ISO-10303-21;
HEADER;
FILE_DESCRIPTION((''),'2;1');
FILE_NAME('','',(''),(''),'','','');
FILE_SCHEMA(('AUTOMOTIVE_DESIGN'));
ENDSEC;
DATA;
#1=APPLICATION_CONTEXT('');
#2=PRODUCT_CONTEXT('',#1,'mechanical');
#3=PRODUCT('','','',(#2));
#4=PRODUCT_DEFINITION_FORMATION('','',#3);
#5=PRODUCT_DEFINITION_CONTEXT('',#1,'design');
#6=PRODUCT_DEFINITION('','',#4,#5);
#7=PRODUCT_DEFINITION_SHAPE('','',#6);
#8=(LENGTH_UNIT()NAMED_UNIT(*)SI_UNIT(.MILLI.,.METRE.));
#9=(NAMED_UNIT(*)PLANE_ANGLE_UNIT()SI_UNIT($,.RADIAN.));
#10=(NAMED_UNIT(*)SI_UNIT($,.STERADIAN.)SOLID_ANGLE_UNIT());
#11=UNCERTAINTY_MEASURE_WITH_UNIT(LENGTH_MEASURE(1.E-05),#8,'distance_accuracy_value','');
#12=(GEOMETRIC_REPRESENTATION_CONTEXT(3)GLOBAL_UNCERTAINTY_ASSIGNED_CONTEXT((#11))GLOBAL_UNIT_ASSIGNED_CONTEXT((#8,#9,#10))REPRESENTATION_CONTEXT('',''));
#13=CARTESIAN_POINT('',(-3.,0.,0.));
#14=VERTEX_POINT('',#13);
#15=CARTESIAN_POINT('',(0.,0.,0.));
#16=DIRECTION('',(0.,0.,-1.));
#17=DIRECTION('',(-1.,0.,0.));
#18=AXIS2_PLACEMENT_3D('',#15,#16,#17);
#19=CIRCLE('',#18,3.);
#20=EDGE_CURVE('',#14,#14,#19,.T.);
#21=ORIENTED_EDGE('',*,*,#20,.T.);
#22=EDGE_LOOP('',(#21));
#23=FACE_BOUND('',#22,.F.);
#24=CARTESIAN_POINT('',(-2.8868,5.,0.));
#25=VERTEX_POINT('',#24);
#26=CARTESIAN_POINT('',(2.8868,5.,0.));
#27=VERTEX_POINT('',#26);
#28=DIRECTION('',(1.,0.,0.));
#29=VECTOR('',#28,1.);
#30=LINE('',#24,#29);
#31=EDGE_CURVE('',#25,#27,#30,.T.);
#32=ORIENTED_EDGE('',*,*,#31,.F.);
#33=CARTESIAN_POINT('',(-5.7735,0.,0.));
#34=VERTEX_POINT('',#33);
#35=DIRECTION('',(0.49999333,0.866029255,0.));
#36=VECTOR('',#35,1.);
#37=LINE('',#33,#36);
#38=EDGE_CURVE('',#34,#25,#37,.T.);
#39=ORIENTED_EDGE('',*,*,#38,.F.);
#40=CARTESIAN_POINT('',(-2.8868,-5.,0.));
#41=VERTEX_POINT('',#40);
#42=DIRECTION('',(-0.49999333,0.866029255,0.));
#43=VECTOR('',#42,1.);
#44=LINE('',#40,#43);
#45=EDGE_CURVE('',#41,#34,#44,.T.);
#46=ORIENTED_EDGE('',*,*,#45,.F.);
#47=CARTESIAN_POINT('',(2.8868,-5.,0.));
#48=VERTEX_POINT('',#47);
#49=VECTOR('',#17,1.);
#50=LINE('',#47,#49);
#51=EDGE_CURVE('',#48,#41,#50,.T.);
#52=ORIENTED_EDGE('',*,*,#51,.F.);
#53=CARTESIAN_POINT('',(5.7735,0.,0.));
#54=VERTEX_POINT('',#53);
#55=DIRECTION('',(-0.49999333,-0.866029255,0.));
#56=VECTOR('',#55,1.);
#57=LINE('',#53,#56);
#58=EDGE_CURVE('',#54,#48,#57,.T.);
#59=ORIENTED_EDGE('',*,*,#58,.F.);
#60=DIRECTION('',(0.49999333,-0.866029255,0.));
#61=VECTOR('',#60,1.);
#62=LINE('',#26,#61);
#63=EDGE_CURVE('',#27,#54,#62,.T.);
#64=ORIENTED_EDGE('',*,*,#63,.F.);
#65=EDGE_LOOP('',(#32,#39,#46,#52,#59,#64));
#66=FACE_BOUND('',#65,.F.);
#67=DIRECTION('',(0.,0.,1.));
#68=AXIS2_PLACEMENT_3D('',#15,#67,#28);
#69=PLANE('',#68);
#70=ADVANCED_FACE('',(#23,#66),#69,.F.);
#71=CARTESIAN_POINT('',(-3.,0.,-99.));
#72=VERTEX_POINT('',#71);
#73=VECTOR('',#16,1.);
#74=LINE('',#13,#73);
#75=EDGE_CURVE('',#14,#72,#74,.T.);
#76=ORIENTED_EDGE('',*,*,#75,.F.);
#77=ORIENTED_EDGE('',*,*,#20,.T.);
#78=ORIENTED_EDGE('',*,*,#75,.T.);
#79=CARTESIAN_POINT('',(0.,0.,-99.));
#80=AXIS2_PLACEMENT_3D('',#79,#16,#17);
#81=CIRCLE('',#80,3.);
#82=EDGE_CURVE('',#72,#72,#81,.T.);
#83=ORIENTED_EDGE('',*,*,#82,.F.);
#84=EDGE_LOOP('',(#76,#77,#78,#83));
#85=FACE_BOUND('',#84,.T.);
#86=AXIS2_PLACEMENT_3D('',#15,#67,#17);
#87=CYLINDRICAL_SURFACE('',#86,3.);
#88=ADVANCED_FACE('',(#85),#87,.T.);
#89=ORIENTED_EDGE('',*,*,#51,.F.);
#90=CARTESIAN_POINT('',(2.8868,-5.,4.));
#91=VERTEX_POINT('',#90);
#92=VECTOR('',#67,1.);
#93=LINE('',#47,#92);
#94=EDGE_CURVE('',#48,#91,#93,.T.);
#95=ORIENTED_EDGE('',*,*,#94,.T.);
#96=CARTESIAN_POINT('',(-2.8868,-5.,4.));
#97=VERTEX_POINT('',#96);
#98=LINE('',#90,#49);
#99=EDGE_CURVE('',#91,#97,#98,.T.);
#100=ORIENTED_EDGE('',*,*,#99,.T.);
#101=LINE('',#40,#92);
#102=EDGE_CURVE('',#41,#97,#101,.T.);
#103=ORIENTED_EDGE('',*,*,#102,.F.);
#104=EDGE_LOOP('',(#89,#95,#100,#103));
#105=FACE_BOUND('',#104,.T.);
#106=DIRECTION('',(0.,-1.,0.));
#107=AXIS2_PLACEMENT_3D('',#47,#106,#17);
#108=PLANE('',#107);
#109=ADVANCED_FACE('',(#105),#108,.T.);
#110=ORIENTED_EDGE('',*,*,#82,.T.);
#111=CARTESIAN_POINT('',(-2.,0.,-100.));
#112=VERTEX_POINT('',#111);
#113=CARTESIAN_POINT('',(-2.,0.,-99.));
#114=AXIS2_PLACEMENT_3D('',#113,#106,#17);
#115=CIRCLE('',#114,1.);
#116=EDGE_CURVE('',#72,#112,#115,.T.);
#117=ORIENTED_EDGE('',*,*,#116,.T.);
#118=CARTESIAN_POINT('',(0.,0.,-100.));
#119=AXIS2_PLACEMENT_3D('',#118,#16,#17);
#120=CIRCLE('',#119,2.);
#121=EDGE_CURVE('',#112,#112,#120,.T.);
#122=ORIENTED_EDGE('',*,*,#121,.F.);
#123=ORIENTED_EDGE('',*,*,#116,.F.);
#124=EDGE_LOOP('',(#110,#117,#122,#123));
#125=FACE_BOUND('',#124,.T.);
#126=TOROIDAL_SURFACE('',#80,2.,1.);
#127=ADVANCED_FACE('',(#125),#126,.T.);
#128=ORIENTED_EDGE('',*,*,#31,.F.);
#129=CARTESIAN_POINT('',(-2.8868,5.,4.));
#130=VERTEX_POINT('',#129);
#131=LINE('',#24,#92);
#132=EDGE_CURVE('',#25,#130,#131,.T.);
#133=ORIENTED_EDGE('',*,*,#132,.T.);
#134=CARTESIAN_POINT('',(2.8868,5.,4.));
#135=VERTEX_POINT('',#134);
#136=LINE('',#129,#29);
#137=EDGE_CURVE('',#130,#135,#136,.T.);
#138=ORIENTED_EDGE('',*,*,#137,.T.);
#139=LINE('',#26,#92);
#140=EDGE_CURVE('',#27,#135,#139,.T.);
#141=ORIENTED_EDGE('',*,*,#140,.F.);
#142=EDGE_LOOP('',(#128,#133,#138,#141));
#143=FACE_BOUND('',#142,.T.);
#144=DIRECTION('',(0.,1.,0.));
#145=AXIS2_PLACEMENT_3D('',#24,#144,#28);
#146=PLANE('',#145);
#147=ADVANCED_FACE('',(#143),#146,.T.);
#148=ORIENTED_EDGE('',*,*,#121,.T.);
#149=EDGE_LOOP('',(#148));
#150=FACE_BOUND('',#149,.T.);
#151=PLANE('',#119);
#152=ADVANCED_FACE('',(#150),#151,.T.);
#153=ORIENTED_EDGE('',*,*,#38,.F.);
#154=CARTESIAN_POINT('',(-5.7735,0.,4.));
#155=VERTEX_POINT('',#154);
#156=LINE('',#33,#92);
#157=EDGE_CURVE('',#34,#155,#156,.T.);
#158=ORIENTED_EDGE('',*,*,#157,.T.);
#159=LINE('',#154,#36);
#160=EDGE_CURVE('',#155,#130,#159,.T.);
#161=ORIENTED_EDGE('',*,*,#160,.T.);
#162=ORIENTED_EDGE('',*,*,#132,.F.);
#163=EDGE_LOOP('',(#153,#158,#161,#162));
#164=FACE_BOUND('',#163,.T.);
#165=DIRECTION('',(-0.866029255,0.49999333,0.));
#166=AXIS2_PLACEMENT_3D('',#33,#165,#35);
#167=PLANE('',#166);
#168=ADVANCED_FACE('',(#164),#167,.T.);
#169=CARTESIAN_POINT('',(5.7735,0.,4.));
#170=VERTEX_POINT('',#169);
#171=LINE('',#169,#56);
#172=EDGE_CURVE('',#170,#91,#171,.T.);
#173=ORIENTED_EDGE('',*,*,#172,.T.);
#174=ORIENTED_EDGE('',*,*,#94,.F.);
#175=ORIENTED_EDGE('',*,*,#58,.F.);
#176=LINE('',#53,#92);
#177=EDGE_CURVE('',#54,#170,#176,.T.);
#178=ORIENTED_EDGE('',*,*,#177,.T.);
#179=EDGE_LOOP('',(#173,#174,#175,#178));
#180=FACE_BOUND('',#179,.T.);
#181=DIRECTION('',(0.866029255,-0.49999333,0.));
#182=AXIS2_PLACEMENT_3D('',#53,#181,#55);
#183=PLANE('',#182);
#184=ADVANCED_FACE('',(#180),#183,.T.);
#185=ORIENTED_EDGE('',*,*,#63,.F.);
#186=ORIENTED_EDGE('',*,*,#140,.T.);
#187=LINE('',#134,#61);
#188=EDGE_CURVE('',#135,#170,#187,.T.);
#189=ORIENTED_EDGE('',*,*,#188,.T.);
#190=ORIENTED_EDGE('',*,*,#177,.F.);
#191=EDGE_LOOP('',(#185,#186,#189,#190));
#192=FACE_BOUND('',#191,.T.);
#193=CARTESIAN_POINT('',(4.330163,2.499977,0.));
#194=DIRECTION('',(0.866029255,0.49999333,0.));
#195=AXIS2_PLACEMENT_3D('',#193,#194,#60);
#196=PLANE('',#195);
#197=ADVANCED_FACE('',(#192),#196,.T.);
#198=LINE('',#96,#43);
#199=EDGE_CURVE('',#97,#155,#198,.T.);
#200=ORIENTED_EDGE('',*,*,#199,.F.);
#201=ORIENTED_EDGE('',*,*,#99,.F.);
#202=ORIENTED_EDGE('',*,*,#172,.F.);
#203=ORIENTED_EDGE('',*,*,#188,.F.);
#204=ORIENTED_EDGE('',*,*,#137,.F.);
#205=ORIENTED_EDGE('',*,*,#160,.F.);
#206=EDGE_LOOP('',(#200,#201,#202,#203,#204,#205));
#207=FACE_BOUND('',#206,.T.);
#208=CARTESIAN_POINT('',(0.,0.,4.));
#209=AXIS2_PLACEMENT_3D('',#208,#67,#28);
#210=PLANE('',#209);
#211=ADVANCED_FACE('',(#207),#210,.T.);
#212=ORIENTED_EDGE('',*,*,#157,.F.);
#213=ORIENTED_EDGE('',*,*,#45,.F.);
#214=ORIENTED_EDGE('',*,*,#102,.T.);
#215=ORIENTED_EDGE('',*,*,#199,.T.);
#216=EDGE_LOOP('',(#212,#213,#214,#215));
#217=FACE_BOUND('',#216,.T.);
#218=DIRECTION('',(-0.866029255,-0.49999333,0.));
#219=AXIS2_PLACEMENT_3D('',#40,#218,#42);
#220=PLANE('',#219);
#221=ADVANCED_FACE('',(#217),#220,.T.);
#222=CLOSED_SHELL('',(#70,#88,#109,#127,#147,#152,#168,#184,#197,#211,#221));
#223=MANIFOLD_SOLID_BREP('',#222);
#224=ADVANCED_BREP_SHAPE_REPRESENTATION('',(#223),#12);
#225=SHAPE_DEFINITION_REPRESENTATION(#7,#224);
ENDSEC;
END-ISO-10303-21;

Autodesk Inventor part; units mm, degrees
ref_plane "YZ Plane" through (0, 0, 0) normal (1, 0, 0) x (0, 1, 0)
ref_plane "XZ Plane" through (0, 0, 0) normal (0, 1, 0) x (-1, 0, 0)
ref_plane "XY Plane" through (0, 0, 0) normal (0, 0, 1) x (1, 0, 0)
sketch "Schizzo1" plane through (0, 0, 0) normal (0, 0, 1) x (1, 0, 0)
  circle A0 centre (0, 0) radius 5
  line L0 (2.8868, 5) -> (5.7735, 0)
  line L1 (5.7735, 0) -> (2.8868, -5)
  line L2 (2.8868, -5) -> (-2.8868, -5)
  line L3 (-2.8868, -5) -> (-5.7735, 0)
  line L4 (-5.7735, 0) -> (-2.8868, 5)
  line L5 (-2.8868, 5) -> (2.8868, 5)
  point P0 (0, 5)
  dimension "d0" = 10
extrude "Estrusione1" add sketch "Schizzo1" along normal blind 4
sketch "Schizzo3" plane through (0, 0, 0) normal (0, 0, -1) x (-1, 0, 0)
  circle A0 centre (0, 0) radius 3
  dimension "d3" = 6
extrude "Estrusione2" add sketch "Schizzo3" along normal blind 100
thread "Filettatura1" size "M6x1" class "6g" standard "ANSI Metric M Profile" full length
fillet "Raccordo1" radius 1 1 edges at (3, 0, -100)
properties part number "18_Vite_M6_L100"
